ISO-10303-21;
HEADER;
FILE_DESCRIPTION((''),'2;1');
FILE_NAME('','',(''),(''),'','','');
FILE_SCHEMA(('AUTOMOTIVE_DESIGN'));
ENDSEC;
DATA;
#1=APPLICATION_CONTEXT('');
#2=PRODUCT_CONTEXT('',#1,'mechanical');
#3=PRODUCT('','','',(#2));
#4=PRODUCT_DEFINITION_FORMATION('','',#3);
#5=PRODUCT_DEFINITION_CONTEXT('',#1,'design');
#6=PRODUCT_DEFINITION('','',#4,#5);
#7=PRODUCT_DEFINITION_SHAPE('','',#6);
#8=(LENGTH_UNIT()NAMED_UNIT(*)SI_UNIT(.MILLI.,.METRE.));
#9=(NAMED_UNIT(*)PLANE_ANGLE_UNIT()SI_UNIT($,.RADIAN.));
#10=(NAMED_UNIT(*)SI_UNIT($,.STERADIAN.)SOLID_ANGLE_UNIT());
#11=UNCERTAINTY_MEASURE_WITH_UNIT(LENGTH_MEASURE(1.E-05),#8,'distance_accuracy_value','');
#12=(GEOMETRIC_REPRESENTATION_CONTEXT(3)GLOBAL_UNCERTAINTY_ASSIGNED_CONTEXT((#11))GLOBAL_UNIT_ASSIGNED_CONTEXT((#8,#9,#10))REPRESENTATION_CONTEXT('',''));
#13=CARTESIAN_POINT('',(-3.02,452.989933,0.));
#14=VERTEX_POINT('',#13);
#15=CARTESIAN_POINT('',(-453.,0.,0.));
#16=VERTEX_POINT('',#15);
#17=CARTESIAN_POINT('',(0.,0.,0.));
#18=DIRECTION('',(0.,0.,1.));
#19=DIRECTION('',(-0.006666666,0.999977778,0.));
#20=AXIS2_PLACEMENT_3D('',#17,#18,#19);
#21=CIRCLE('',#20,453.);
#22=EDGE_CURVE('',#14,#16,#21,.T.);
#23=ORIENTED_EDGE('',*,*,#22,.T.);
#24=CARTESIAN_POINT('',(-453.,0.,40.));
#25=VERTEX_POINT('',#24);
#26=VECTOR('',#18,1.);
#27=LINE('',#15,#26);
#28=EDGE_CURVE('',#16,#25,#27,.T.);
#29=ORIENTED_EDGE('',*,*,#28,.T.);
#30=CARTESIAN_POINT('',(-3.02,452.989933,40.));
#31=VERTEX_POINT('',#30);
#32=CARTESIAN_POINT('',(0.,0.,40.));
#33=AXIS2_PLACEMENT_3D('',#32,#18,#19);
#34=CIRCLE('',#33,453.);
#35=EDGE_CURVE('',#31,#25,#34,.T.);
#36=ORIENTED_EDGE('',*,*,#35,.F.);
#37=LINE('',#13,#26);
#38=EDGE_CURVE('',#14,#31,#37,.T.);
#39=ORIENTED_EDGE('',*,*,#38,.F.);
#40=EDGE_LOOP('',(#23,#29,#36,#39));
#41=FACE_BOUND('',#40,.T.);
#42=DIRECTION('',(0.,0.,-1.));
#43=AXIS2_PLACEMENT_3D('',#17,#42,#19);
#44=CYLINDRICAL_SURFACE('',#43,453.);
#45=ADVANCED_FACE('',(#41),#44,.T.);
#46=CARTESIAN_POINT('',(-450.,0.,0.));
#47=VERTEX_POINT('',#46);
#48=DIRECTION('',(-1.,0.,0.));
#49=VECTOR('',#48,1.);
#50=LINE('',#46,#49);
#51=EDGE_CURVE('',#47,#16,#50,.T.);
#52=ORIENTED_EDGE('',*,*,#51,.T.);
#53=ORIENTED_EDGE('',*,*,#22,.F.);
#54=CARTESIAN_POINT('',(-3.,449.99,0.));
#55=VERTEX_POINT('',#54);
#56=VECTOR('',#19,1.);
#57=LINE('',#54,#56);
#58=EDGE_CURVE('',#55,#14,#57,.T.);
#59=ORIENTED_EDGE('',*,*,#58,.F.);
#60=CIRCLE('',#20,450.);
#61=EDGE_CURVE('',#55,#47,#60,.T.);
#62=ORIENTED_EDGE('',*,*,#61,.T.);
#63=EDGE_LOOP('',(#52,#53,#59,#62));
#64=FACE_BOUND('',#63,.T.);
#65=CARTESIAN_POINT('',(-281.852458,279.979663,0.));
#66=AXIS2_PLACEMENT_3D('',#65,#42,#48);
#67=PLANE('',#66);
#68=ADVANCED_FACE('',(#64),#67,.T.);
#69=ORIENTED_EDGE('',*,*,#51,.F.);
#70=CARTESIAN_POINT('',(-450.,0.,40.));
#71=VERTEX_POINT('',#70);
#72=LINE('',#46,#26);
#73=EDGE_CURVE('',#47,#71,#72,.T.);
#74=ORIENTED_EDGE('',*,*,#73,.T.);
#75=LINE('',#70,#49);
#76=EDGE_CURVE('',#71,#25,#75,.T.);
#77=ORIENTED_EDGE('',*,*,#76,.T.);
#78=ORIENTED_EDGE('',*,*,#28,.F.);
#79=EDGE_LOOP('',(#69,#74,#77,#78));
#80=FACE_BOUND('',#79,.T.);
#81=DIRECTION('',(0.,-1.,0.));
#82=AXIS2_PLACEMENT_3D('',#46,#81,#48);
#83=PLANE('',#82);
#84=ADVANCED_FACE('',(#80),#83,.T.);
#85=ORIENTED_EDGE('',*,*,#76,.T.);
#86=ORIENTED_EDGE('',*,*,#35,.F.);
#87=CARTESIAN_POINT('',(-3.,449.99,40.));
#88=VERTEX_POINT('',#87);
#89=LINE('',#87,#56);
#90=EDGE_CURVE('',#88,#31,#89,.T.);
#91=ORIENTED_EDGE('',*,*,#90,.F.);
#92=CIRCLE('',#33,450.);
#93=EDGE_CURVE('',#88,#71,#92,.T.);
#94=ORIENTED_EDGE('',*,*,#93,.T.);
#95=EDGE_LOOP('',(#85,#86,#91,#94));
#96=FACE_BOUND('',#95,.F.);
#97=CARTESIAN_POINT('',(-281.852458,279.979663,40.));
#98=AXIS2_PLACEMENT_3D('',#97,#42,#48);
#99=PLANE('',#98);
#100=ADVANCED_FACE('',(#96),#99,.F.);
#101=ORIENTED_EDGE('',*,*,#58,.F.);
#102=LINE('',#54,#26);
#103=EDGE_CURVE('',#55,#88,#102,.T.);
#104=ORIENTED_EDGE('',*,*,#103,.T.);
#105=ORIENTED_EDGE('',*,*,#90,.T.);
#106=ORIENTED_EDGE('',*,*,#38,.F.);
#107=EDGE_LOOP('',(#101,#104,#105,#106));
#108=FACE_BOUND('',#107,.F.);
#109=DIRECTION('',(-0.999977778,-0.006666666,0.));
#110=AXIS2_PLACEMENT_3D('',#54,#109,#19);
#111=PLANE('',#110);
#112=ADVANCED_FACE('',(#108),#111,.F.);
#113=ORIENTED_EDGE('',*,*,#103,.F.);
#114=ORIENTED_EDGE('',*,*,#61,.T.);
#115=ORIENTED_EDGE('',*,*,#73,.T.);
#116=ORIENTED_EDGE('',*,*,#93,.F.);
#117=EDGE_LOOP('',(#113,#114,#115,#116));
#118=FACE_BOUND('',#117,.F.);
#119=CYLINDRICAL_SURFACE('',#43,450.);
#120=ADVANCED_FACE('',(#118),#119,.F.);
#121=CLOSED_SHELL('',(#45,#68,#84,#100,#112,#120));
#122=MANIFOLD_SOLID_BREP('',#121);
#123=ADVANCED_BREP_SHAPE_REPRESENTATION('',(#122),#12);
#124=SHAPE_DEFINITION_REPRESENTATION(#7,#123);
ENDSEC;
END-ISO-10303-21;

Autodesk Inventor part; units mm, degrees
ref_plane "YZ Plane" through (0, 0, 0) normal (1, 0, 0) x (0, 1, 0)
ref_plane "XZ Plane" through (0, 0, 0) normal (0, 1, 0) x (-1, 0, 0)
ref_plane "XY Plane" through (0, 0, 0) normal (0, 0, 1) x (1, 0, 0)
sketch "Sketch3" plane through (0, 0, 0) normal (0, 0, 1) x (1, 0, 0)
  arc A0 (-450, 0) -> (0, 450) centre (0, 0) ccw construction
  line L0 (-450, 0) -> (0, 0) construction
  line L1 (0, 0) -> (0, 450) construction
  arc A1 (0, 450) -> (-3, 449.99) centre (0, 0) ccw construction
  line L2 (0, 0) -> (-3, 449.99) construction
  arc A2 (-3, 449.99) -> (-450, 0) centre (0, 0) ccw
  dimension "d13" = 900
  dimension "d26" = 3
contour flange "Contour Flange1" sketch "Sketch3" thickness 3 bend radius 5 width 40 along (0, 0, 1) mid plane no both sides no wall seen from (-319.2569, 317.1356, 0) lies toward (-0.7094599, 0.7047458, 0) curves A2
bend "Bend1"
corner "Corner1"
equation "\"d14\" = Thickness"
equation "\"d15\" = BendReliefWidth"
equation "\"d16\" = BendReliefDepth"
equation "\"d17\" = MinimumRemnant"
equation "\"d18\" = TransitionRadius"
equation "\"d20\" = BendRadius"
equation "\"d22\" = CornerReliefSize"
equation "\"d23\" = GapSize"
equation "\"d24\" = JacobiRadiusSize"
equation "\"BendReliefWidth\" = Thickness"
equation "\"BendReliefDepth\" = 0.5 * Thickness"
equation "\"CornerReliefSize\" = 4 * Thickness"
equation "\"MinimumRemnant\" = 2 * Thickness"
equation "\"TransitionRadius\" = BendRadius"
equation "\"JacobiRadiusSize\" = BendRadius"
equation "\"GapSize\" = Thickness"
equation "\"Thickness\" = 3"
equation "\"BendRadius\" = 5"
properties part number "BSH 507 edge amplifier" material "Stainless Steel"
